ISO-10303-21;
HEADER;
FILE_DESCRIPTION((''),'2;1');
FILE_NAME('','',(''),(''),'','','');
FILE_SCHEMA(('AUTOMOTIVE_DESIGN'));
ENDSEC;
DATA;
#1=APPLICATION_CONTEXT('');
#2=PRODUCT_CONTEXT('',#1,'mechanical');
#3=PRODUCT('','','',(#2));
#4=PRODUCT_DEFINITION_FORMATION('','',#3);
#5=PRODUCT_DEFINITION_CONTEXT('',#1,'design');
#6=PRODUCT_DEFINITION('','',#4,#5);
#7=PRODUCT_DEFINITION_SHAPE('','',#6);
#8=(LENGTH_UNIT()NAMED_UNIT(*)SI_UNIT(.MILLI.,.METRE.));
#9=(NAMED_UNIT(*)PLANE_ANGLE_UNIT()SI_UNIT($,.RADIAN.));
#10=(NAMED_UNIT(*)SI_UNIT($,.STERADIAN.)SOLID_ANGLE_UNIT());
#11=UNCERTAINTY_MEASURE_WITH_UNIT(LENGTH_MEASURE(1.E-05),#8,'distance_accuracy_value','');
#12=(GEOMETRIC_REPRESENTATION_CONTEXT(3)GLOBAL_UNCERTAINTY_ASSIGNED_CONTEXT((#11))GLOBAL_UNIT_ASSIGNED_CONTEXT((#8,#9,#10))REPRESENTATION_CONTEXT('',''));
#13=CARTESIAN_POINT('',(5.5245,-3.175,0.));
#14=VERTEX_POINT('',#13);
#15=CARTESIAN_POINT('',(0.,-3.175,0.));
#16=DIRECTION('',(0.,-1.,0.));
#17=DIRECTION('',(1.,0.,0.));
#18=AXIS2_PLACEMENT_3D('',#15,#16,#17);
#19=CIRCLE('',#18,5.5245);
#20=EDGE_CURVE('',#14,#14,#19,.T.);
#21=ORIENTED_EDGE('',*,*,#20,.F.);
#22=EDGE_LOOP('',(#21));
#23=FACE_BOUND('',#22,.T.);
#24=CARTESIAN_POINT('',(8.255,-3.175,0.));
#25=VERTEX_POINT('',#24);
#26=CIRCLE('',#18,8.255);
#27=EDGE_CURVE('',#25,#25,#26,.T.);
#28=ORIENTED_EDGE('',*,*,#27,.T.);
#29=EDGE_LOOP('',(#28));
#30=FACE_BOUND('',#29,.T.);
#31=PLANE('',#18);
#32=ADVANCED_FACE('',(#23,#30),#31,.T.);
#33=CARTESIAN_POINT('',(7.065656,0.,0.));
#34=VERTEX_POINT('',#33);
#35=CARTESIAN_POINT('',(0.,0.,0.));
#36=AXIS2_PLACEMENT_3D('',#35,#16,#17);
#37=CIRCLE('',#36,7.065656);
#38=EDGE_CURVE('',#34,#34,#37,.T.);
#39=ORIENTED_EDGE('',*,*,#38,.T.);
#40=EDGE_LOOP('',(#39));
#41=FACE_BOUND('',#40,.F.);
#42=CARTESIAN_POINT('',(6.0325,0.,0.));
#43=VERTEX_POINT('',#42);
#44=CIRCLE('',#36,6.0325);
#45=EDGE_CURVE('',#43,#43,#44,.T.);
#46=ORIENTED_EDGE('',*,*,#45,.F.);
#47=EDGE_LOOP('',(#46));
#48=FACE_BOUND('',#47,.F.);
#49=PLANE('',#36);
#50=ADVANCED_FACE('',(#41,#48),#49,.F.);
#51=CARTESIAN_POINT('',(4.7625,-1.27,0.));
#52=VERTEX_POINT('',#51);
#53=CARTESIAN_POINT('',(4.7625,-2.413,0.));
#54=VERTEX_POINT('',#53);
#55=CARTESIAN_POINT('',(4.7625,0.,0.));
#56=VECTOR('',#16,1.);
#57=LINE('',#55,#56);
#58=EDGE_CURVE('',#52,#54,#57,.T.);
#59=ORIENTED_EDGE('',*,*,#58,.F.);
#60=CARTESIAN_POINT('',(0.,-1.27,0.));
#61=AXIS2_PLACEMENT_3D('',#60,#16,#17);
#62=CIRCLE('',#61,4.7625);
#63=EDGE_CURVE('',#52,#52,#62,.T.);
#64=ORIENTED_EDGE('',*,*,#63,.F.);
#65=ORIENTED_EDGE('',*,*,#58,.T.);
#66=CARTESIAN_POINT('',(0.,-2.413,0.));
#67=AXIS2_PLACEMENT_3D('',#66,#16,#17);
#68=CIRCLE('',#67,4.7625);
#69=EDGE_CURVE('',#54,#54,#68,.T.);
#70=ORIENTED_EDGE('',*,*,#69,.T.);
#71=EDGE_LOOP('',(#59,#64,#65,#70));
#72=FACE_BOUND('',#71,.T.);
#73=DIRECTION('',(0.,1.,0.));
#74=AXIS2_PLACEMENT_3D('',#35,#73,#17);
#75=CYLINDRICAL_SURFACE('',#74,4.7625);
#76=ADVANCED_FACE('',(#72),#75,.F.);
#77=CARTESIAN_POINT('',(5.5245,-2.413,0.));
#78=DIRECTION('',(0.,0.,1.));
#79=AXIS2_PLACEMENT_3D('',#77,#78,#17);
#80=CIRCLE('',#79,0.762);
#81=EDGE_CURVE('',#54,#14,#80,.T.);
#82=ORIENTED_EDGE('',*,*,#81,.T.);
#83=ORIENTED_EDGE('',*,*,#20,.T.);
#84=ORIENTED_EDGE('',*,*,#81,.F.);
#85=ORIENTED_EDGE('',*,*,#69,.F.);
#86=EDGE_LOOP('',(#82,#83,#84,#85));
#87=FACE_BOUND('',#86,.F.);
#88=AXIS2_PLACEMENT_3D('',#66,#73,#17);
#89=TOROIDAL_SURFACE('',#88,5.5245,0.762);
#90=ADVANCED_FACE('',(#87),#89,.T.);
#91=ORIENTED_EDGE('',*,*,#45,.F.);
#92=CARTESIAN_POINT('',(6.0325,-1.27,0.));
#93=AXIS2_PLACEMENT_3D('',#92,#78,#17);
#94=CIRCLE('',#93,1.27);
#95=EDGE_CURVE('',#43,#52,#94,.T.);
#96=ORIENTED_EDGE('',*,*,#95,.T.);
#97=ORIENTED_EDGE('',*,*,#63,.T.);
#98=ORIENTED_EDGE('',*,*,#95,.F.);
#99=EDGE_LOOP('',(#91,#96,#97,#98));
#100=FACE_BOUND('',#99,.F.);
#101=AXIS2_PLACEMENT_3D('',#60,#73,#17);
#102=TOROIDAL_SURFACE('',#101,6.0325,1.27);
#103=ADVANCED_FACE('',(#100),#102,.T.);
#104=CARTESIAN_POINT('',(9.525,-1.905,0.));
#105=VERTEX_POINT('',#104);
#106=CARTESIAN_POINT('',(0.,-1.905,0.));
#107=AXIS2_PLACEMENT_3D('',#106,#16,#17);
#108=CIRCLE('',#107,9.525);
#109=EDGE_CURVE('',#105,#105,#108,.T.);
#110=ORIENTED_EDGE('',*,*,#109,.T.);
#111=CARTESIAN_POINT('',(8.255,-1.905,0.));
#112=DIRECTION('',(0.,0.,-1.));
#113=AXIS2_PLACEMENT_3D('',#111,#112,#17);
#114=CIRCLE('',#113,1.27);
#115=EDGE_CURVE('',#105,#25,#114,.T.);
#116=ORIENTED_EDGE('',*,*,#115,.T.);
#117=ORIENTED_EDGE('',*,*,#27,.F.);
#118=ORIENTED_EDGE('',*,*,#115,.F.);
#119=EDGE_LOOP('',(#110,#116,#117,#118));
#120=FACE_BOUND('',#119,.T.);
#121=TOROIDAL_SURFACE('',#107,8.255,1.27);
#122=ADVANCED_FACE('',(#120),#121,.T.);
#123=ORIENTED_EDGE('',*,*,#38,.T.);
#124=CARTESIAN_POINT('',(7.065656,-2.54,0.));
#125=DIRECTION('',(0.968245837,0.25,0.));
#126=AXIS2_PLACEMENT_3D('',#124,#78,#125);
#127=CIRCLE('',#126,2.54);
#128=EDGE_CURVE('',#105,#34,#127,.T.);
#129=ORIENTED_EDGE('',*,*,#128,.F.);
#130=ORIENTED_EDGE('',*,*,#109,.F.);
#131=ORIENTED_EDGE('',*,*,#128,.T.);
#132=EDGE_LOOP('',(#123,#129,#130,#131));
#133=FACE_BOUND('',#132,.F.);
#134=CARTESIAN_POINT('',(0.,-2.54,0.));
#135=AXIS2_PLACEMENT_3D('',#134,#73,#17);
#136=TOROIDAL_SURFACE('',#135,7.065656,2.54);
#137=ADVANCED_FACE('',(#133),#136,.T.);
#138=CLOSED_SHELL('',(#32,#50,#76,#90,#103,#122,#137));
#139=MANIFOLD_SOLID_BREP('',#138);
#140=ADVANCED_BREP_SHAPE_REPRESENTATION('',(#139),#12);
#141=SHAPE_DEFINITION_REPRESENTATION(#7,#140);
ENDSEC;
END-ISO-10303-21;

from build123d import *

# Parameters (mm, degrees)
F0_R     = 9.525
F0_R_2   = 4.7625
F1_DEPTH = 3.175
F2_R     = 1.27
F4_R     = 1.27
F5_R     = 0.762


# Not quite as in the source:
# - a fillet or chamfer that OpenCascade refuses, or shapes differently, is made with other operations: its cross-section is extruded or revolved along the edge and cut away or added


with BuildPart() as f1:
    # F0 (on Front) → F1 (new body)
    with BuildSketch(Plane.XZ):
        Circle(F0_R)
        Circle(F0_R_2, mode=Mode.SUBTRACT)
    extrude(amount=F1_DEPTH)

    # F2
    f2_edges = [f1.edges().sort_by_distance(p)[0] for p in [
        (-9.525, -3.175, 0),
    ]]
    fillet(f2_edges, radius=F2_R)

    # F3: fillet of radius 2.54 on 1 edges, made by hand

    # F3_s1 → F3_t2 (revolve, cut)
    with BuildSketch(Plane.XY):
        with BuildLine():
            ThreePointArc((9.525, -1.905), (8.6210815618, -0.5319536858), (7.0656555752, 0))
            Line((7.0656555752, 0), (7.0656555752, 0.0508))
            Line((7.0656555752, 0.0508), (9.525, 0.0508))
            Line((9.525, 0.0508), (9.5758, 0))
            ThreePointArc((9.5758, 0), (9.5758, -0.9525), (9.5741868885, -1.8923))
            Line((9.5741868885, -1.8923), (9.525, -1.905))
        make_face()
    revolve(axis=Axis((0, 0, 0), (0, -1, 0)), mode=Mode.SUBTRACT)

    # F4
    f4_edges = [f1.edges().sort_by_distance(p)[0] for p in [
        (-4.7625, 0, 0),
    ]]
    fillet(f4_edges, radius=F4_R)

    # F5
    f5_edges = [f1.edges().sort_by_distance(p)[0] for p in [
        (-4.7625, -3.175, 0),
    ]]
    fillet(f5_edges, radius=F5_R)


solid = f1.part
